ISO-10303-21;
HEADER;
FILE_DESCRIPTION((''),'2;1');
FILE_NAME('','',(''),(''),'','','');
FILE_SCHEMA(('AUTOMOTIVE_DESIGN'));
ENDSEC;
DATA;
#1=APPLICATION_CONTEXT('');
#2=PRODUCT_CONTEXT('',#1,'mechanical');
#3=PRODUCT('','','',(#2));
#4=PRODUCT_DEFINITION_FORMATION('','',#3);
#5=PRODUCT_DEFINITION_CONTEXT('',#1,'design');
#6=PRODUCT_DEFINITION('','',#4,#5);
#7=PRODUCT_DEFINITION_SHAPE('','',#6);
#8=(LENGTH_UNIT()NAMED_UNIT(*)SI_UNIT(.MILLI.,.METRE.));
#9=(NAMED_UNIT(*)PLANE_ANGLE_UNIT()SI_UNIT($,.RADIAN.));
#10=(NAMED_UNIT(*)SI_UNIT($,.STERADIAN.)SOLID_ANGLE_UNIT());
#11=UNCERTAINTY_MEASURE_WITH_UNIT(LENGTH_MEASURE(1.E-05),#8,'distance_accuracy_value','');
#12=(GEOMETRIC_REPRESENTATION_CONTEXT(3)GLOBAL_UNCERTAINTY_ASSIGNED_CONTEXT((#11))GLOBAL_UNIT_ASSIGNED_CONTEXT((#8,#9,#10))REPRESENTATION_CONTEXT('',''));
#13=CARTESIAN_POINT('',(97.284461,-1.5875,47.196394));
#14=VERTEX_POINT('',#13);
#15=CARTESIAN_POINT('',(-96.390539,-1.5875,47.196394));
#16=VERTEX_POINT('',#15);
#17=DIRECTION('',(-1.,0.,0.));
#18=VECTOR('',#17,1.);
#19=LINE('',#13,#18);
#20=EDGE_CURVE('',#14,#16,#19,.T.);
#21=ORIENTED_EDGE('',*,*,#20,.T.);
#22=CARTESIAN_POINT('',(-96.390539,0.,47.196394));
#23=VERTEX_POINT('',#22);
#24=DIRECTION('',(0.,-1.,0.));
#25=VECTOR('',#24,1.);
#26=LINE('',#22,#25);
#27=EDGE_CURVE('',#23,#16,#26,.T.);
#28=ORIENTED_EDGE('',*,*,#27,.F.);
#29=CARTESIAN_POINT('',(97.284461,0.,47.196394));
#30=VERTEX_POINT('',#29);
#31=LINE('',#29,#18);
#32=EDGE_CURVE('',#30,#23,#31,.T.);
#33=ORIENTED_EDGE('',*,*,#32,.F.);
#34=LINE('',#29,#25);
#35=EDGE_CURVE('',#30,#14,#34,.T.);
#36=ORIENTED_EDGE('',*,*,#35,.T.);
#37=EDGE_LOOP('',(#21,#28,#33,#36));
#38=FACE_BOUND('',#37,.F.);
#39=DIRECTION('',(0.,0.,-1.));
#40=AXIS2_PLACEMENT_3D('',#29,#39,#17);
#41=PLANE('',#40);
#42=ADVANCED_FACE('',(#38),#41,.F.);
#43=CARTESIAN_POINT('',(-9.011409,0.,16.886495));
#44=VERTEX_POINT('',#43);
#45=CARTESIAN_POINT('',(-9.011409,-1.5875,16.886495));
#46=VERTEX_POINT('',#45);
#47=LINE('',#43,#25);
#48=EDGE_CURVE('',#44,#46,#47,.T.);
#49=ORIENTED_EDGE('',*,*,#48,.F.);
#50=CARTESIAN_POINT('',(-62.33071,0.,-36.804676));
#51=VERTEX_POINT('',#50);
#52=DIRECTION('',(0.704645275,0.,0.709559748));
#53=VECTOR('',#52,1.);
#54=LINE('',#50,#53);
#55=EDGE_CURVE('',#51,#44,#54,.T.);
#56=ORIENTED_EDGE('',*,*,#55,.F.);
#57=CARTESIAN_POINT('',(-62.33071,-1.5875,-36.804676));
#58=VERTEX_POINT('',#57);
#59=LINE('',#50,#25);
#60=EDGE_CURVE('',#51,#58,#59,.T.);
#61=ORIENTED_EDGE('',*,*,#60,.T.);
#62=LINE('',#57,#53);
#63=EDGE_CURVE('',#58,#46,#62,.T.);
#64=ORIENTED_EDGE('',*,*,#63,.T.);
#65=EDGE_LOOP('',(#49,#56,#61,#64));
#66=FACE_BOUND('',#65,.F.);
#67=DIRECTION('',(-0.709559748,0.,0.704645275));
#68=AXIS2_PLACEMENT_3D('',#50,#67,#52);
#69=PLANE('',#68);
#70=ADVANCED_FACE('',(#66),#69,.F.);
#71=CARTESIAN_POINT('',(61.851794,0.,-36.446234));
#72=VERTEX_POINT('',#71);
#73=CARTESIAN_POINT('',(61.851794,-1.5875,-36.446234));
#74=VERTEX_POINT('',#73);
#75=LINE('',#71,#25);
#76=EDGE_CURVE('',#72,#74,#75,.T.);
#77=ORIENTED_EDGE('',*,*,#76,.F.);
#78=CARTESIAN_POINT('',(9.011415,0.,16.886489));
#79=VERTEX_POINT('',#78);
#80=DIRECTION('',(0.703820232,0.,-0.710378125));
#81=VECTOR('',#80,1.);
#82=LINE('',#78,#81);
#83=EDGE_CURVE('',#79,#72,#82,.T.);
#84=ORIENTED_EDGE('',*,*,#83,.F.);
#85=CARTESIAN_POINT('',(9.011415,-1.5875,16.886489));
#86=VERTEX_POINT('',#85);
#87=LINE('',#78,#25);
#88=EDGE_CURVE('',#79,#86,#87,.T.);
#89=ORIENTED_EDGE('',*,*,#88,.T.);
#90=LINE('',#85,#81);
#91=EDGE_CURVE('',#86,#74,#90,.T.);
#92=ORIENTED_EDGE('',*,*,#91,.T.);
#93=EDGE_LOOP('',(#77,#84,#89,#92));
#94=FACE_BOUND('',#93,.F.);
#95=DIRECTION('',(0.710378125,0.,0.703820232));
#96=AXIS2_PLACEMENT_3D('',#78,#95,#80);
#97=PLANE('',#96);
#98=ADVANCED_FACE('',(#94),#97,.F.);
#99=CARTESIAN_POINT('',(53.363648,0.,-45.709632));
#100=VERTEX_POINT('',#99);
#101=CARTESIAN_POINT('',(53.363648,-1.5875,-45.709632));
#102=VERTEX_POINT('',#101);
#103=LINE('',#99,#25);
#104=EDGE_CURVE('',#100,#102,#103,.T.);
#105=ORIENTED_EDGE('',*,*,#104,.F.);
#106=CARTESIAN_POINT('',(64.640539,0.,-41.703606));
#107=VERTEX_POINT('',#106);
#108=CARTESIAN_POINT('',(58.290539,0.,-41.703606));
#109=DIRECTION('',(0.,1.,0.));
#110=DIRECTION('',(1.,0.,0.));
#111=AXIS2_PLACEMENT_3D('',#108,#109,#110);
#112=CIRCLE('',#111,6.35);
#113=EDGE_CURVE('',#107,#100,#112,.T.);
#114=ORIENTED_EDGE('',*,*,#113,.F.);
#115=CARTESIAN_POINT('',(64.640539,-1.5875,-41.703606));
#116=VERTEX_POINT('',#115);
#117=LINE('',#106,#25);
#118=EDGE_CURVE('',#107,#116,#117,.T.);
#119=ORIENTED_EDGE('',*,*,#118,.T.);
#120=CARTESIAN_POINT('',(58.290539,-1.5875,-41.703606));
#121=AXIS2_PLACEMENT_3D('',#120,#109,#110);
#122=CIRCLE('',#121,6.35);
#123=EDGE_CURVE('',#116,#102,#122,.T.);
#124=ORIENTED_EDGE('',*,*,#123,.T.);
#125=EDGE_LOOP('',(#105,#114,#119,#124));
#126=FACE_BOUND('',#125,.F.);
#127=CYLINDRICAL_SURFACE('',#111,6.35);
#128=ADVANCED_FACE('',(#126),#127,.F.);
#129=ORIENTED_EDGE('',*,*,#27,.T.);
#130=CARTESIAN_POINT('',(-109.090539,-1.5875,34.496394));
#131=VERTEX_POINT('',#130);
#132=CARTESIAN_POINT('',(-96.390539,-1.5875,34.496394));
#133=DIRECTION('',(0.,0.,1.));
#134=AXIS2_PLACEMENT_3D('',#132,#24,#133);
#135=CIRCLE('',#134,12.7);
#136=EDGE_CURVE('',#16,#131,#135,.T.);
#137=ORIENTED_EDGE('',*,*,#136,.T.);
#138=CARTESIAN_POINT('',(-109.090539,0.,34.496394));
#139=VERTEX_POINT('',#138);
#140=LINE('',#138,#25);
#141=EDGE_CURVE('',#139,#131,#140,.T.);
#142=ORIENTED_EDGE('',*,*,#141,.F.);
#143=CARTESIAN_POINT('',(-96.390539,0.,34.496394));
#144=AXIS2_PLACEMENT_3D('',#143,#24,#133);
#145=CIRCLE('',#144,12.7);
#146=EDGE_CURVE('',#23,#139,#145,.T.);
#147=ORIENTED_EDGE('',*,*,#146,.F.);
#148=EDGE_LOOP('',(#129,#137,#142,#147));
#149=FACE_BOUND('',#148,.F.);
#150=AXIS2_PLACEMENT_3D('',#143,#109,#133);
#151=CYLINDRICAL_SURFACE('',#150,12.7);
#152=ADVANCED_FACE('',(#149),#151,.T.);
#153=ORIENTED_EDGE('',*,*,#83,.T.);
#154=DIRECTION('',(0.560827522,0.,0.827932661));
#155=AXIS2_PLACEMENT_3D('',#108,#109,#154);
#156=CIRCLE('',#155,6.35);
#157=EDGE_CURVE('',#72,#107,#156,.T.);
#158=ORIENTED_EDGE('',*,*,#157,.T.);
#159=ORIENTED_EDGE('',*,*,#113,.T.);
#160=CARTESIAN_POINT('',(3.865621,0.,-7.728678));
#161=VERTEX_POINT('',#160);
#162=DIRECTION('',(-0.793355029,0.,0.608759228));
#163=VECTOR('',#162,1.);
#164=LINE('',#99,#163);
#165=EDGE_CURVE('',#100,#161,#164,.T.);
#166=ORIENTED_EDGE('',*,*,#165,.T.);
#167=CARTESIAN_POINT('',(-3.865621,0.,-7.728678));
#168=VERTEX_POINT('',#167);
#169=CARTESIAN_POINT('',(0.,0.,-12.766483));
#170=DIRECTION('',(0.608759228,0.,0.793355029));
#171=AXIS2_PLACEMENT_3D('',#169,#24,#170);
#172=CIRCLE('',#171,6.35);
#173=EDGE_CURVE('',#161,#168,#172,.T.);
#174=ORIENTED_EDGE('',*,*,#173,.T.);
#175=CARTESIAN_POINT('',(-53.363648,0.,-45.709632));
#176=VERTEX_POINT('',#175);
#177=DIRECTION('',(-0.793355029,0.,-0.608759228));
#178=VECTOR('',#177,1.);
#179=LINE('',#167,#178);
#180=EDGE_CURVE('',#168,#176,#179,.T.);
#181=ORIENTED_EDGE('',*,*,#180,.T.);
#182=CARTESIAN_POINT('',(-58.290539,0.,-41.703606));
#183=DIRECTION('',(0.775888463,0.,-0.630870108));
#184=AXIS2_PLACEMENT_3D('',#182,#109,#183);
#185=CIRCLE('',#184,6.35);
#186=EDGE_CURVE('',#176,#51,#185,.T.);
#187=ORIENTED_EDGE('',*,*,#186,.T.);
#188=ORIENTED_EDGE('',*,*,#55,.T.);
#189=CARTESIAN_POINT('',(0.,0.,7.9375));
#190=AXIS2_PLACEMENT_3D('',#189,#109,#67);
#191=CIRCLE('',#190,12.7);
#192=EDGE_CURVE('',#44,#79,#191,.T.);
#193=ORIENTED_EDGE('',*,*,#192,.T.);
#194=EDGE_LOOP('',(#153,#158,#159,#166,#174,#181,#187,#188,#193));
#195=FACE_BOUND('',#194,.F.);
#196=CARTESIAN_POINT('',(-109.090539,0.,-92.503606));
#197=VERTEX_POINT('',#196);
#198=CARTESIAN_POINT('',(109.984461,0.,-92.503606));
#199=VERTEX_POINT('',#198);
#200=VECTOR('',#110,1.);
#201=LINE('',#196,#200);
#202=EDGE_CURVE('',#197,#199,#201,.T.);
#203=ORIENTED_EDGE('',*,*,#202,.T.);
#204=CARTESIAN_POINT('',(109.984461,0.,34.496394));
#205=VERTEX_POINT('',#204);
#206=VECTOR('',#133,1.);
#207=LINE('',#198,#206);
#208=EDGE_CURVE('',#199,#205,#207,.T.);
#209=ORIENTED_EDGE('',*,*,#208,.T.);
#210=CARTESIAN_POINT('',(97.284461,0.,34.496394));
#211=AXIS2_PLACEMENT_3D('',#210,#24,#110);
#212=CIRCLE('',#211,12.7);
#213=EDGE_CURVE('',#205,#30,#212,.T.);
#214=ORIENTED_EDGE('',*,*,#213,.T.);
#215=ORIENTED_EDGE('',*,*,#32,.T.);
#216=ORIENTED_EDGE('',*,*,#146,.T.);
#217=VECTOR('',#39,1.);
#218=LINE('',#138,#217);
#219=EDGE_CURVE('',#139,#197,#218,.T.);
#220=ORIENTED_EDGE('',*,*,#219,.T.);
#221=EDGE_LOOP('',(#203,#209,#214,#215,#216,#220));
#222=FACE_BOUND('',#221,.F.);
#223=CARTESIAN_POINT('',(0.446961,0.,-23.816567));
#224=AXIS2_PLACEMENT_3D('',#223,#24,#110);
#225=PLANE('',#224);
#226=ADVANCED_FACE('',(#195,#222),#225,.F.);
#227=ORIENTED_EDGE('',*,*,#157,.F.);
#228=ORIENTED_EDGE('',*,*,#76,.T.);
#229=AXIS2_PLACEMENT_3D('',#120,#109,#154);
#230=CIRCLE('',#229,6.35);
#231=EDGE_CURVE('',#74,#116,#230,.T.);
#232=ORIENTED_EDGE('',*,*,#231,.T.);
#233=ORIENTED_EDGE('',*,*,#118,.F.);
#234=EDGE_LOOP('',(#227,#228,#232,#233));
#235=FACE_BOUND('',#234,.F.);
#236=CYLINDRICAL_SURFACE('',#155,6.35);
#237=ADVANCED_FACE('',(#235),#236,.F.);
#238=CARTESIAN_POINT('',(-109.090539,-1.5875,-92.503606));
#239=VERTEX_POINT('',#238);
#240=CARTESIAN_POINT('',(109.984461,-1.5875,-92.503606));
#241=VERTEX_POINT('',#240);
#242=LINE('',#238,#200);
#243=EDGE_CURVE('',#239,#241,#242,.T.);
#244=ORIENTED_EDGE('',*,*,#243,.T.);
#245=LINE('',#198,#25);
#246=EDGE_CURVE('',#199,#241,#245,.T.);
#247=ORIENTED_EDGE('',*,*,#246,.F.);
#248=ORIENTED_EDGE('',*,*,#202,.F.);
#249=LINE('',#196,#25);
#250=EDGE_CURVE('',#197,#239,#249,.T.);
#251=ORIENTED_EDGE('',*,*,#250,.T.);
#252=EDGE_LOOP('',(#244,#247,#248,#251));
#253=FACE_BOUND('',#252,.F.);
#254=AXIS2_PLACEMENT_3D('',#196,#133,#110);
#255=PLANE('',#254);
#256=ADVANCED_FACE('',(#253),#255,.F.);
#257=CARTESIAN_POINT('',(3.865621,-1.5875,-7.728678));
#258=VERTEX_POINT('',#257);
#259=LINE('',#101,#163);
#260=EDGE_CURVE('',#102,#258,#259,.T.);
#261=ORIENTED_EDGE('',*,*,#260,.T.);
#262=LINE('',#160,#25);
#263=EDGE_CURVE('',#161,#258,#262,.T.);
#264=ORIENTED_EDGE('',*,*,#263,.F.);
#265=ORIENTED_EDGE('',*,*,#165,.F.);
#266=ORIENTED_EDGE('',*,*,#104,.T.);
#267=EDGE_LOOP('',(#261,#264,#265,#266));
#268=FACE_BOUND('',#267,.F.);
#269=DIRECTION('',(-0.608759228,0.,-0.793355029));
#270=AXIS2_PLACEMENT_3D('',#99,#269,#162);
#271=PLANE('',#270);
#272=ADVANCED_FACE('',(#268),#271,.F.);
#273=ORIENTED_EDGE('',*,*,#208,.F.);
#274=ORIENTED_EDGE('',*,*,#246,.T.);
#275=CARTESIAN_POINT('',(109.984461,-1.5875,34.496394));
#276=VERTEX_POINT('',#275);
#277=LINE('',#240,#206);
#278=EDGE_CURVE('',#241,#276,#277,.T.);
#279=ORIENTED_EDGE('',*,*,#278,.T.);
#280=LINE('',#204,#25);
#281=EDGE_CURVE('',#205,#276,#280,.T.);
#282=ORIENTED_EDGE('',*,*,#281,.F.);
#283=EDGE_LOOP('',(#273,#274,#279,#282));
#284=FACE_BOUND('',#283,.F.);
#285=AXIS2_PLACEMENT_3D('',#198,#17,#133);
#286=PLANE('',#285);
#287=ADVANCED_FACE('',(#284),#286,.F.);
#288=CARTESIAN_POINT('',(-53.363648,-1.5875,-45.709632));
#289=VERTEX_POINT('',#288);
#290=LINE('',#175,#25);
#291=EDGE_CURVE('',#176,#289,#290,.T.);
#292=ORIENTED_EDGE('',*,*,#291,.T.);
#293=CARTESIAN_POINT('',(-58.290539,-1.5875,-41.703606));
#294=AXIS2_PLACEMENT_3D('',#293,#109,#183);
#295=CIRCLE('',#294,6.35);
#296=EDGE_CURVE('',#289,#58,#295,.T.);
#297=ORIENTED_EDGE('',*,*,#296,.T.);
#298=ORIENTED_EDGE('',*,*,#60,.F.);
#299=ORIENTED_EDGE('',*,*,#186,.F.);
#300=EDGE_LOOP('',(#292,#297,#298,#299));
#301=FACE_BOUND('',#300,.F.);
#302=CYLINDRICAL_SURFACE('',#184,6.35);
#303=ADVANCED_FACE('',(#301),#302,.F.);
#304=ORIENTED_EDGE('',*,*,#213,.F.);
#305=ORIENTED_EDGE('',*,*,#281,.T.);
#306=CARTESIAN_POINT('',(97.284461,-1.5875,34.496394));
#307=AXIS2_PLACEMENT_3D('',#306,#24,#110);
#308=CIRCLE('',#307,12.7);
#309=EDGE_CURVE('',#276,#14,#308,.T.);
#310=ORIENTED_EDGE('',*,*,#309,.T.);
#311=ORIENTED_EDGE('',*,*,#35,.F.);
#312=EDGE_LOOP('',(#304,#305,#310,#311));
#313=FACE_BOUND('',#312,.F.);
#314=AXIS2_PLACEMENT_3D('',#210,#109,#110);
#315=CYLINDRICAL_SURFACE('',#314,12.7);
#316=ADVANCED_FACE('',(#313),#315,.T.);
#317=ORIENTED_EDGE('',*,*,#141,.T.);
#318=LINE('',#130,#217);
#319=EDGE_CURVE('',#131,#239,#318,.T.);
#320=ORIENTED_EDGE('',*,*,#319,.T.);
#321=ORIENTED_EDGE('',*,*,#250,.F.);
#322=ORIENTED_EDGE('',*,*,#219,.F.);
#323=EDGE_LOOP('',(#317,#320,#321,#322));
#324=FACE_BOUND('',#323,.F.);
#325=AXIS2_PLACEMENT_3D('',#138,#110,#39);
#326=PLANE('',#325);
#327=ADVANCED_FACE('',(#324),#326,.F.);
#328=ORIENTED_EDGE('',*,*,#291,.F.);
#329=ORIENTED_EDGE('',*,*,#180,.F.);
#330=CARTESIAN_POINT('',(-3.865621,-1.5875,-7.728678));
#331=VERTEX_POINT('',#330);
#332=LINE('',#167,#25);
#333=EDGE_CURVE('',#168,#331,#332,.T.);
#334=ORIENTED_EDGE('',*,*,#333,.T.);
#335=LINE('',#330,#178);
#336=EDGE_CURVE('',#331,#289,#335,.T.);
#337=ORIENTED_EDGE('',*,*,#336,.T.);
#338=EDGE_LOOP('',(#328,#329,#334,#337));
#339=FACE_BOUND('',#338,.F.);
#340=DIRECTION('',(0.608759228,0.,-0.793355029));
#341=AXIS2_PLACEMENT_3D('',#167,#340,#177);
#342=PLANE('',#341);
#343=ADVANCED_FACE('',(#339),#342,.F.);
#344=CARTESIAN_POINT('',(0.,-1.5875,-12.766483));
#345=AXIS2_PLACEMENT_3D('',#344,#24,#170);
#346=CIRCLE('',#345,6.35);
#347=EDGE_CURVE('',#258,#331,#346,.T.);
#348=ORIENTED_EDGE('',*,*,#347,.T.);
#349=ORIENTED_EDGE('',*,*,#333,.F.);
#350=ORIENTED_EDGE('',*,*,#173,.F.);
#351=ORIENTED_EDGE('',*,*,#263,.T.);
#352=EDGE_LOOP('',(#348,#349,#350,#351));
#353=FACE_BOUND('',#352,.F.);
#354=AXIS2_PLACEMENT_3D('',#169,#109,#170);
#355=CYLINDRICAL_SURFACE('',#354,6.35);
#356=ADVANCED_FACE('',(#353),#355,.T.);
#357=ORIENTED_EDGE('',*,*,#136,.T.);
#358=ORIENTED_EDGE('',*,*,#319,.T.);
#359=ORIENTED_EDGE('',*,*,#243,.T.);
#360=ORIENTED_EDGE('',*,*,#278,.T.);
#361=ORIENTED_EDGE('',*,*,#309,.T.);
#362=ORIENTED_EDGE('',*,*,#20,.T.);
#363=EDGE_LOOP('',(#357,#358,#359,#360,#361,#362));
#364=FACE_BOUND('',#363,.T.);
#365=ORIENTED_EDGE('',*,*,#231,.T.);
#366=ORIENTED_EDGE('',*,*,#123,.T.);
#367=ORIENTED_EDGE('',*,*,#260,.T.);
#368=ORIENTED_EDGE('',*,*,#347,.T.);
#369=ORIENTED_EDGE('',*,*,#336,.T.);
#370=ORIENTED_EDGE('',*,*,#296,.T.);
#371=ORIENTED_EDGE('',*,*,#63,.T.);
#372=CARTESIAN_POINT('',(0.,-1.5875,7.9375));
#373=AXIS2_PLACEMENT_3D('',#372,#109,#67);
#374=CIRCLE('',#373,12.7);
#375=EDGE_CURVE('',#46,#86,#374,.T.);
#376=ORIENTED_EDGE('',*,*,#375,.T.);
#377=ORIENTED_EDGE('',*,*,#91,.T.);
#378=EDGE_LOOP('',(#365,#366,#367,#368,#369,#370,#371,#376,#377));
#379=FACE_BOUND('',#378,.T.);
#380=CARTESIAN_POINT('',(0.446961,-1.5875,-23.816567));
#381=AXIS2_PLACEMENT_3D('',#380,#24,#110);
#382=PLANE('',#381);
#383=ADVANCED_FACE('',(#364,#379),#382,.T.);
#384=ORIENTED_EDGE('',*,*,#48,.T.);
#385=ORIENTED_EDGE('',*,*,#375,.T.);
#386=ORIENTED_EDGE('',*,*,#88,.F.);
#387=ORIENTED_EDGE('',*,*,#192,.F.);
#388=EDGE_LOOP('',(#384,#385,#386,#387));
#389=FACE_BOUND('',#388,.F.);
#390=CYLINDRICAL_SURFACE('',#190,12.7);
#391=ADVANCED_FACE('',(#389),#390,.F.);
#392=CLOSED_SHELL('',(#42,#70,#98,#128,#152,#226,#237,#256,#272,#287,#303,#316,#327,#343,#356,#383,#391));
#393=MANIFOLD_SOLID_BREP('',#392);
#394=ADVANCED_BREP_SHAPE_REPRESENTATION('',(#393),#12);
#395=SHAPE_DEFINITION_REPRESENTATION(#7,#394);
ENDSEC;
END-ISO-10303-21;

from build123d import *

# Parameters (mm, degrees)
F1_DEPTH = 1.5875


# Not quite as in the source:
# - ends of sketch curves that miss each other by under 0.0002 mm in the source are joined


with BuildPart() as f1:
    # F0 (on Front) → F1 (new body)
    with BuildSketch(Plane.XZ):
        with BuildLine():
            Line((97.284460747, 47.1963935311), (-96.390539253, 47.1963935311))
            ThreePointArc((-96.390539253, 47.1963935311), (-105.370795374, 43.4766496521), (-109.090539253, 34.4963935311))
            Line((-109.090539253, 34.4963935311), (-109.090539253, -92.5036064689))
            Line((-109.090539253, -92.5036064689), (109.984460747, -92.5036064689))
            Line((109.984460747, -92.5036064689), (109.984460747, 34.4963935311))
            ThreePointArc((109.984460747, 34.4963935311), (106.2647168681, 43.4766496521), (97.284460747, 47.1963935311))
        make_face()
        with BuildLine():
            ThreePointArc((-53.3636475136, -45.7096316546), (-62.7650367506, -46.2093108693), (-62.3307099384, -36.8046758885))
            Line((-62.3307099384, -36.8046758885), (-9.0114088008, 16.8864949952))
            ThreePointArc((-9.0114088008, 16.8864949952), (4.2539e-06, 20.6375), (9.0114147958, 16.8864889585))
            Line((9.0114147958, 16.8864889585), (61.8517940181, -36.4462340741))
            ThreePointArc((61.8517940181, -36.4462340741), (63.9001946683, -38.7279945788), (64.640539253, -41.7036064689))
            ThreePointArc((64.640539253, -41.7036064689), (60.4161847378, -47.6872618127), (53.3636475136, -45.7096316546))
            Line((53.3636475136, -45.7096316546), (3.8656210952, -7.7286783496))
            ThreePointArc((3.8656210952, -7.7286783496), (0, -6.4164827869), (-3.8656210952, -7.7286783496))
            Line((-3.8656210952, -7.7286783496), (-53.3636475136, -45.7096316546))
        make_face(mode=Mode.SUBTRACT)
    extrude(amount=F1_DEPTH)


solid = f1.part
